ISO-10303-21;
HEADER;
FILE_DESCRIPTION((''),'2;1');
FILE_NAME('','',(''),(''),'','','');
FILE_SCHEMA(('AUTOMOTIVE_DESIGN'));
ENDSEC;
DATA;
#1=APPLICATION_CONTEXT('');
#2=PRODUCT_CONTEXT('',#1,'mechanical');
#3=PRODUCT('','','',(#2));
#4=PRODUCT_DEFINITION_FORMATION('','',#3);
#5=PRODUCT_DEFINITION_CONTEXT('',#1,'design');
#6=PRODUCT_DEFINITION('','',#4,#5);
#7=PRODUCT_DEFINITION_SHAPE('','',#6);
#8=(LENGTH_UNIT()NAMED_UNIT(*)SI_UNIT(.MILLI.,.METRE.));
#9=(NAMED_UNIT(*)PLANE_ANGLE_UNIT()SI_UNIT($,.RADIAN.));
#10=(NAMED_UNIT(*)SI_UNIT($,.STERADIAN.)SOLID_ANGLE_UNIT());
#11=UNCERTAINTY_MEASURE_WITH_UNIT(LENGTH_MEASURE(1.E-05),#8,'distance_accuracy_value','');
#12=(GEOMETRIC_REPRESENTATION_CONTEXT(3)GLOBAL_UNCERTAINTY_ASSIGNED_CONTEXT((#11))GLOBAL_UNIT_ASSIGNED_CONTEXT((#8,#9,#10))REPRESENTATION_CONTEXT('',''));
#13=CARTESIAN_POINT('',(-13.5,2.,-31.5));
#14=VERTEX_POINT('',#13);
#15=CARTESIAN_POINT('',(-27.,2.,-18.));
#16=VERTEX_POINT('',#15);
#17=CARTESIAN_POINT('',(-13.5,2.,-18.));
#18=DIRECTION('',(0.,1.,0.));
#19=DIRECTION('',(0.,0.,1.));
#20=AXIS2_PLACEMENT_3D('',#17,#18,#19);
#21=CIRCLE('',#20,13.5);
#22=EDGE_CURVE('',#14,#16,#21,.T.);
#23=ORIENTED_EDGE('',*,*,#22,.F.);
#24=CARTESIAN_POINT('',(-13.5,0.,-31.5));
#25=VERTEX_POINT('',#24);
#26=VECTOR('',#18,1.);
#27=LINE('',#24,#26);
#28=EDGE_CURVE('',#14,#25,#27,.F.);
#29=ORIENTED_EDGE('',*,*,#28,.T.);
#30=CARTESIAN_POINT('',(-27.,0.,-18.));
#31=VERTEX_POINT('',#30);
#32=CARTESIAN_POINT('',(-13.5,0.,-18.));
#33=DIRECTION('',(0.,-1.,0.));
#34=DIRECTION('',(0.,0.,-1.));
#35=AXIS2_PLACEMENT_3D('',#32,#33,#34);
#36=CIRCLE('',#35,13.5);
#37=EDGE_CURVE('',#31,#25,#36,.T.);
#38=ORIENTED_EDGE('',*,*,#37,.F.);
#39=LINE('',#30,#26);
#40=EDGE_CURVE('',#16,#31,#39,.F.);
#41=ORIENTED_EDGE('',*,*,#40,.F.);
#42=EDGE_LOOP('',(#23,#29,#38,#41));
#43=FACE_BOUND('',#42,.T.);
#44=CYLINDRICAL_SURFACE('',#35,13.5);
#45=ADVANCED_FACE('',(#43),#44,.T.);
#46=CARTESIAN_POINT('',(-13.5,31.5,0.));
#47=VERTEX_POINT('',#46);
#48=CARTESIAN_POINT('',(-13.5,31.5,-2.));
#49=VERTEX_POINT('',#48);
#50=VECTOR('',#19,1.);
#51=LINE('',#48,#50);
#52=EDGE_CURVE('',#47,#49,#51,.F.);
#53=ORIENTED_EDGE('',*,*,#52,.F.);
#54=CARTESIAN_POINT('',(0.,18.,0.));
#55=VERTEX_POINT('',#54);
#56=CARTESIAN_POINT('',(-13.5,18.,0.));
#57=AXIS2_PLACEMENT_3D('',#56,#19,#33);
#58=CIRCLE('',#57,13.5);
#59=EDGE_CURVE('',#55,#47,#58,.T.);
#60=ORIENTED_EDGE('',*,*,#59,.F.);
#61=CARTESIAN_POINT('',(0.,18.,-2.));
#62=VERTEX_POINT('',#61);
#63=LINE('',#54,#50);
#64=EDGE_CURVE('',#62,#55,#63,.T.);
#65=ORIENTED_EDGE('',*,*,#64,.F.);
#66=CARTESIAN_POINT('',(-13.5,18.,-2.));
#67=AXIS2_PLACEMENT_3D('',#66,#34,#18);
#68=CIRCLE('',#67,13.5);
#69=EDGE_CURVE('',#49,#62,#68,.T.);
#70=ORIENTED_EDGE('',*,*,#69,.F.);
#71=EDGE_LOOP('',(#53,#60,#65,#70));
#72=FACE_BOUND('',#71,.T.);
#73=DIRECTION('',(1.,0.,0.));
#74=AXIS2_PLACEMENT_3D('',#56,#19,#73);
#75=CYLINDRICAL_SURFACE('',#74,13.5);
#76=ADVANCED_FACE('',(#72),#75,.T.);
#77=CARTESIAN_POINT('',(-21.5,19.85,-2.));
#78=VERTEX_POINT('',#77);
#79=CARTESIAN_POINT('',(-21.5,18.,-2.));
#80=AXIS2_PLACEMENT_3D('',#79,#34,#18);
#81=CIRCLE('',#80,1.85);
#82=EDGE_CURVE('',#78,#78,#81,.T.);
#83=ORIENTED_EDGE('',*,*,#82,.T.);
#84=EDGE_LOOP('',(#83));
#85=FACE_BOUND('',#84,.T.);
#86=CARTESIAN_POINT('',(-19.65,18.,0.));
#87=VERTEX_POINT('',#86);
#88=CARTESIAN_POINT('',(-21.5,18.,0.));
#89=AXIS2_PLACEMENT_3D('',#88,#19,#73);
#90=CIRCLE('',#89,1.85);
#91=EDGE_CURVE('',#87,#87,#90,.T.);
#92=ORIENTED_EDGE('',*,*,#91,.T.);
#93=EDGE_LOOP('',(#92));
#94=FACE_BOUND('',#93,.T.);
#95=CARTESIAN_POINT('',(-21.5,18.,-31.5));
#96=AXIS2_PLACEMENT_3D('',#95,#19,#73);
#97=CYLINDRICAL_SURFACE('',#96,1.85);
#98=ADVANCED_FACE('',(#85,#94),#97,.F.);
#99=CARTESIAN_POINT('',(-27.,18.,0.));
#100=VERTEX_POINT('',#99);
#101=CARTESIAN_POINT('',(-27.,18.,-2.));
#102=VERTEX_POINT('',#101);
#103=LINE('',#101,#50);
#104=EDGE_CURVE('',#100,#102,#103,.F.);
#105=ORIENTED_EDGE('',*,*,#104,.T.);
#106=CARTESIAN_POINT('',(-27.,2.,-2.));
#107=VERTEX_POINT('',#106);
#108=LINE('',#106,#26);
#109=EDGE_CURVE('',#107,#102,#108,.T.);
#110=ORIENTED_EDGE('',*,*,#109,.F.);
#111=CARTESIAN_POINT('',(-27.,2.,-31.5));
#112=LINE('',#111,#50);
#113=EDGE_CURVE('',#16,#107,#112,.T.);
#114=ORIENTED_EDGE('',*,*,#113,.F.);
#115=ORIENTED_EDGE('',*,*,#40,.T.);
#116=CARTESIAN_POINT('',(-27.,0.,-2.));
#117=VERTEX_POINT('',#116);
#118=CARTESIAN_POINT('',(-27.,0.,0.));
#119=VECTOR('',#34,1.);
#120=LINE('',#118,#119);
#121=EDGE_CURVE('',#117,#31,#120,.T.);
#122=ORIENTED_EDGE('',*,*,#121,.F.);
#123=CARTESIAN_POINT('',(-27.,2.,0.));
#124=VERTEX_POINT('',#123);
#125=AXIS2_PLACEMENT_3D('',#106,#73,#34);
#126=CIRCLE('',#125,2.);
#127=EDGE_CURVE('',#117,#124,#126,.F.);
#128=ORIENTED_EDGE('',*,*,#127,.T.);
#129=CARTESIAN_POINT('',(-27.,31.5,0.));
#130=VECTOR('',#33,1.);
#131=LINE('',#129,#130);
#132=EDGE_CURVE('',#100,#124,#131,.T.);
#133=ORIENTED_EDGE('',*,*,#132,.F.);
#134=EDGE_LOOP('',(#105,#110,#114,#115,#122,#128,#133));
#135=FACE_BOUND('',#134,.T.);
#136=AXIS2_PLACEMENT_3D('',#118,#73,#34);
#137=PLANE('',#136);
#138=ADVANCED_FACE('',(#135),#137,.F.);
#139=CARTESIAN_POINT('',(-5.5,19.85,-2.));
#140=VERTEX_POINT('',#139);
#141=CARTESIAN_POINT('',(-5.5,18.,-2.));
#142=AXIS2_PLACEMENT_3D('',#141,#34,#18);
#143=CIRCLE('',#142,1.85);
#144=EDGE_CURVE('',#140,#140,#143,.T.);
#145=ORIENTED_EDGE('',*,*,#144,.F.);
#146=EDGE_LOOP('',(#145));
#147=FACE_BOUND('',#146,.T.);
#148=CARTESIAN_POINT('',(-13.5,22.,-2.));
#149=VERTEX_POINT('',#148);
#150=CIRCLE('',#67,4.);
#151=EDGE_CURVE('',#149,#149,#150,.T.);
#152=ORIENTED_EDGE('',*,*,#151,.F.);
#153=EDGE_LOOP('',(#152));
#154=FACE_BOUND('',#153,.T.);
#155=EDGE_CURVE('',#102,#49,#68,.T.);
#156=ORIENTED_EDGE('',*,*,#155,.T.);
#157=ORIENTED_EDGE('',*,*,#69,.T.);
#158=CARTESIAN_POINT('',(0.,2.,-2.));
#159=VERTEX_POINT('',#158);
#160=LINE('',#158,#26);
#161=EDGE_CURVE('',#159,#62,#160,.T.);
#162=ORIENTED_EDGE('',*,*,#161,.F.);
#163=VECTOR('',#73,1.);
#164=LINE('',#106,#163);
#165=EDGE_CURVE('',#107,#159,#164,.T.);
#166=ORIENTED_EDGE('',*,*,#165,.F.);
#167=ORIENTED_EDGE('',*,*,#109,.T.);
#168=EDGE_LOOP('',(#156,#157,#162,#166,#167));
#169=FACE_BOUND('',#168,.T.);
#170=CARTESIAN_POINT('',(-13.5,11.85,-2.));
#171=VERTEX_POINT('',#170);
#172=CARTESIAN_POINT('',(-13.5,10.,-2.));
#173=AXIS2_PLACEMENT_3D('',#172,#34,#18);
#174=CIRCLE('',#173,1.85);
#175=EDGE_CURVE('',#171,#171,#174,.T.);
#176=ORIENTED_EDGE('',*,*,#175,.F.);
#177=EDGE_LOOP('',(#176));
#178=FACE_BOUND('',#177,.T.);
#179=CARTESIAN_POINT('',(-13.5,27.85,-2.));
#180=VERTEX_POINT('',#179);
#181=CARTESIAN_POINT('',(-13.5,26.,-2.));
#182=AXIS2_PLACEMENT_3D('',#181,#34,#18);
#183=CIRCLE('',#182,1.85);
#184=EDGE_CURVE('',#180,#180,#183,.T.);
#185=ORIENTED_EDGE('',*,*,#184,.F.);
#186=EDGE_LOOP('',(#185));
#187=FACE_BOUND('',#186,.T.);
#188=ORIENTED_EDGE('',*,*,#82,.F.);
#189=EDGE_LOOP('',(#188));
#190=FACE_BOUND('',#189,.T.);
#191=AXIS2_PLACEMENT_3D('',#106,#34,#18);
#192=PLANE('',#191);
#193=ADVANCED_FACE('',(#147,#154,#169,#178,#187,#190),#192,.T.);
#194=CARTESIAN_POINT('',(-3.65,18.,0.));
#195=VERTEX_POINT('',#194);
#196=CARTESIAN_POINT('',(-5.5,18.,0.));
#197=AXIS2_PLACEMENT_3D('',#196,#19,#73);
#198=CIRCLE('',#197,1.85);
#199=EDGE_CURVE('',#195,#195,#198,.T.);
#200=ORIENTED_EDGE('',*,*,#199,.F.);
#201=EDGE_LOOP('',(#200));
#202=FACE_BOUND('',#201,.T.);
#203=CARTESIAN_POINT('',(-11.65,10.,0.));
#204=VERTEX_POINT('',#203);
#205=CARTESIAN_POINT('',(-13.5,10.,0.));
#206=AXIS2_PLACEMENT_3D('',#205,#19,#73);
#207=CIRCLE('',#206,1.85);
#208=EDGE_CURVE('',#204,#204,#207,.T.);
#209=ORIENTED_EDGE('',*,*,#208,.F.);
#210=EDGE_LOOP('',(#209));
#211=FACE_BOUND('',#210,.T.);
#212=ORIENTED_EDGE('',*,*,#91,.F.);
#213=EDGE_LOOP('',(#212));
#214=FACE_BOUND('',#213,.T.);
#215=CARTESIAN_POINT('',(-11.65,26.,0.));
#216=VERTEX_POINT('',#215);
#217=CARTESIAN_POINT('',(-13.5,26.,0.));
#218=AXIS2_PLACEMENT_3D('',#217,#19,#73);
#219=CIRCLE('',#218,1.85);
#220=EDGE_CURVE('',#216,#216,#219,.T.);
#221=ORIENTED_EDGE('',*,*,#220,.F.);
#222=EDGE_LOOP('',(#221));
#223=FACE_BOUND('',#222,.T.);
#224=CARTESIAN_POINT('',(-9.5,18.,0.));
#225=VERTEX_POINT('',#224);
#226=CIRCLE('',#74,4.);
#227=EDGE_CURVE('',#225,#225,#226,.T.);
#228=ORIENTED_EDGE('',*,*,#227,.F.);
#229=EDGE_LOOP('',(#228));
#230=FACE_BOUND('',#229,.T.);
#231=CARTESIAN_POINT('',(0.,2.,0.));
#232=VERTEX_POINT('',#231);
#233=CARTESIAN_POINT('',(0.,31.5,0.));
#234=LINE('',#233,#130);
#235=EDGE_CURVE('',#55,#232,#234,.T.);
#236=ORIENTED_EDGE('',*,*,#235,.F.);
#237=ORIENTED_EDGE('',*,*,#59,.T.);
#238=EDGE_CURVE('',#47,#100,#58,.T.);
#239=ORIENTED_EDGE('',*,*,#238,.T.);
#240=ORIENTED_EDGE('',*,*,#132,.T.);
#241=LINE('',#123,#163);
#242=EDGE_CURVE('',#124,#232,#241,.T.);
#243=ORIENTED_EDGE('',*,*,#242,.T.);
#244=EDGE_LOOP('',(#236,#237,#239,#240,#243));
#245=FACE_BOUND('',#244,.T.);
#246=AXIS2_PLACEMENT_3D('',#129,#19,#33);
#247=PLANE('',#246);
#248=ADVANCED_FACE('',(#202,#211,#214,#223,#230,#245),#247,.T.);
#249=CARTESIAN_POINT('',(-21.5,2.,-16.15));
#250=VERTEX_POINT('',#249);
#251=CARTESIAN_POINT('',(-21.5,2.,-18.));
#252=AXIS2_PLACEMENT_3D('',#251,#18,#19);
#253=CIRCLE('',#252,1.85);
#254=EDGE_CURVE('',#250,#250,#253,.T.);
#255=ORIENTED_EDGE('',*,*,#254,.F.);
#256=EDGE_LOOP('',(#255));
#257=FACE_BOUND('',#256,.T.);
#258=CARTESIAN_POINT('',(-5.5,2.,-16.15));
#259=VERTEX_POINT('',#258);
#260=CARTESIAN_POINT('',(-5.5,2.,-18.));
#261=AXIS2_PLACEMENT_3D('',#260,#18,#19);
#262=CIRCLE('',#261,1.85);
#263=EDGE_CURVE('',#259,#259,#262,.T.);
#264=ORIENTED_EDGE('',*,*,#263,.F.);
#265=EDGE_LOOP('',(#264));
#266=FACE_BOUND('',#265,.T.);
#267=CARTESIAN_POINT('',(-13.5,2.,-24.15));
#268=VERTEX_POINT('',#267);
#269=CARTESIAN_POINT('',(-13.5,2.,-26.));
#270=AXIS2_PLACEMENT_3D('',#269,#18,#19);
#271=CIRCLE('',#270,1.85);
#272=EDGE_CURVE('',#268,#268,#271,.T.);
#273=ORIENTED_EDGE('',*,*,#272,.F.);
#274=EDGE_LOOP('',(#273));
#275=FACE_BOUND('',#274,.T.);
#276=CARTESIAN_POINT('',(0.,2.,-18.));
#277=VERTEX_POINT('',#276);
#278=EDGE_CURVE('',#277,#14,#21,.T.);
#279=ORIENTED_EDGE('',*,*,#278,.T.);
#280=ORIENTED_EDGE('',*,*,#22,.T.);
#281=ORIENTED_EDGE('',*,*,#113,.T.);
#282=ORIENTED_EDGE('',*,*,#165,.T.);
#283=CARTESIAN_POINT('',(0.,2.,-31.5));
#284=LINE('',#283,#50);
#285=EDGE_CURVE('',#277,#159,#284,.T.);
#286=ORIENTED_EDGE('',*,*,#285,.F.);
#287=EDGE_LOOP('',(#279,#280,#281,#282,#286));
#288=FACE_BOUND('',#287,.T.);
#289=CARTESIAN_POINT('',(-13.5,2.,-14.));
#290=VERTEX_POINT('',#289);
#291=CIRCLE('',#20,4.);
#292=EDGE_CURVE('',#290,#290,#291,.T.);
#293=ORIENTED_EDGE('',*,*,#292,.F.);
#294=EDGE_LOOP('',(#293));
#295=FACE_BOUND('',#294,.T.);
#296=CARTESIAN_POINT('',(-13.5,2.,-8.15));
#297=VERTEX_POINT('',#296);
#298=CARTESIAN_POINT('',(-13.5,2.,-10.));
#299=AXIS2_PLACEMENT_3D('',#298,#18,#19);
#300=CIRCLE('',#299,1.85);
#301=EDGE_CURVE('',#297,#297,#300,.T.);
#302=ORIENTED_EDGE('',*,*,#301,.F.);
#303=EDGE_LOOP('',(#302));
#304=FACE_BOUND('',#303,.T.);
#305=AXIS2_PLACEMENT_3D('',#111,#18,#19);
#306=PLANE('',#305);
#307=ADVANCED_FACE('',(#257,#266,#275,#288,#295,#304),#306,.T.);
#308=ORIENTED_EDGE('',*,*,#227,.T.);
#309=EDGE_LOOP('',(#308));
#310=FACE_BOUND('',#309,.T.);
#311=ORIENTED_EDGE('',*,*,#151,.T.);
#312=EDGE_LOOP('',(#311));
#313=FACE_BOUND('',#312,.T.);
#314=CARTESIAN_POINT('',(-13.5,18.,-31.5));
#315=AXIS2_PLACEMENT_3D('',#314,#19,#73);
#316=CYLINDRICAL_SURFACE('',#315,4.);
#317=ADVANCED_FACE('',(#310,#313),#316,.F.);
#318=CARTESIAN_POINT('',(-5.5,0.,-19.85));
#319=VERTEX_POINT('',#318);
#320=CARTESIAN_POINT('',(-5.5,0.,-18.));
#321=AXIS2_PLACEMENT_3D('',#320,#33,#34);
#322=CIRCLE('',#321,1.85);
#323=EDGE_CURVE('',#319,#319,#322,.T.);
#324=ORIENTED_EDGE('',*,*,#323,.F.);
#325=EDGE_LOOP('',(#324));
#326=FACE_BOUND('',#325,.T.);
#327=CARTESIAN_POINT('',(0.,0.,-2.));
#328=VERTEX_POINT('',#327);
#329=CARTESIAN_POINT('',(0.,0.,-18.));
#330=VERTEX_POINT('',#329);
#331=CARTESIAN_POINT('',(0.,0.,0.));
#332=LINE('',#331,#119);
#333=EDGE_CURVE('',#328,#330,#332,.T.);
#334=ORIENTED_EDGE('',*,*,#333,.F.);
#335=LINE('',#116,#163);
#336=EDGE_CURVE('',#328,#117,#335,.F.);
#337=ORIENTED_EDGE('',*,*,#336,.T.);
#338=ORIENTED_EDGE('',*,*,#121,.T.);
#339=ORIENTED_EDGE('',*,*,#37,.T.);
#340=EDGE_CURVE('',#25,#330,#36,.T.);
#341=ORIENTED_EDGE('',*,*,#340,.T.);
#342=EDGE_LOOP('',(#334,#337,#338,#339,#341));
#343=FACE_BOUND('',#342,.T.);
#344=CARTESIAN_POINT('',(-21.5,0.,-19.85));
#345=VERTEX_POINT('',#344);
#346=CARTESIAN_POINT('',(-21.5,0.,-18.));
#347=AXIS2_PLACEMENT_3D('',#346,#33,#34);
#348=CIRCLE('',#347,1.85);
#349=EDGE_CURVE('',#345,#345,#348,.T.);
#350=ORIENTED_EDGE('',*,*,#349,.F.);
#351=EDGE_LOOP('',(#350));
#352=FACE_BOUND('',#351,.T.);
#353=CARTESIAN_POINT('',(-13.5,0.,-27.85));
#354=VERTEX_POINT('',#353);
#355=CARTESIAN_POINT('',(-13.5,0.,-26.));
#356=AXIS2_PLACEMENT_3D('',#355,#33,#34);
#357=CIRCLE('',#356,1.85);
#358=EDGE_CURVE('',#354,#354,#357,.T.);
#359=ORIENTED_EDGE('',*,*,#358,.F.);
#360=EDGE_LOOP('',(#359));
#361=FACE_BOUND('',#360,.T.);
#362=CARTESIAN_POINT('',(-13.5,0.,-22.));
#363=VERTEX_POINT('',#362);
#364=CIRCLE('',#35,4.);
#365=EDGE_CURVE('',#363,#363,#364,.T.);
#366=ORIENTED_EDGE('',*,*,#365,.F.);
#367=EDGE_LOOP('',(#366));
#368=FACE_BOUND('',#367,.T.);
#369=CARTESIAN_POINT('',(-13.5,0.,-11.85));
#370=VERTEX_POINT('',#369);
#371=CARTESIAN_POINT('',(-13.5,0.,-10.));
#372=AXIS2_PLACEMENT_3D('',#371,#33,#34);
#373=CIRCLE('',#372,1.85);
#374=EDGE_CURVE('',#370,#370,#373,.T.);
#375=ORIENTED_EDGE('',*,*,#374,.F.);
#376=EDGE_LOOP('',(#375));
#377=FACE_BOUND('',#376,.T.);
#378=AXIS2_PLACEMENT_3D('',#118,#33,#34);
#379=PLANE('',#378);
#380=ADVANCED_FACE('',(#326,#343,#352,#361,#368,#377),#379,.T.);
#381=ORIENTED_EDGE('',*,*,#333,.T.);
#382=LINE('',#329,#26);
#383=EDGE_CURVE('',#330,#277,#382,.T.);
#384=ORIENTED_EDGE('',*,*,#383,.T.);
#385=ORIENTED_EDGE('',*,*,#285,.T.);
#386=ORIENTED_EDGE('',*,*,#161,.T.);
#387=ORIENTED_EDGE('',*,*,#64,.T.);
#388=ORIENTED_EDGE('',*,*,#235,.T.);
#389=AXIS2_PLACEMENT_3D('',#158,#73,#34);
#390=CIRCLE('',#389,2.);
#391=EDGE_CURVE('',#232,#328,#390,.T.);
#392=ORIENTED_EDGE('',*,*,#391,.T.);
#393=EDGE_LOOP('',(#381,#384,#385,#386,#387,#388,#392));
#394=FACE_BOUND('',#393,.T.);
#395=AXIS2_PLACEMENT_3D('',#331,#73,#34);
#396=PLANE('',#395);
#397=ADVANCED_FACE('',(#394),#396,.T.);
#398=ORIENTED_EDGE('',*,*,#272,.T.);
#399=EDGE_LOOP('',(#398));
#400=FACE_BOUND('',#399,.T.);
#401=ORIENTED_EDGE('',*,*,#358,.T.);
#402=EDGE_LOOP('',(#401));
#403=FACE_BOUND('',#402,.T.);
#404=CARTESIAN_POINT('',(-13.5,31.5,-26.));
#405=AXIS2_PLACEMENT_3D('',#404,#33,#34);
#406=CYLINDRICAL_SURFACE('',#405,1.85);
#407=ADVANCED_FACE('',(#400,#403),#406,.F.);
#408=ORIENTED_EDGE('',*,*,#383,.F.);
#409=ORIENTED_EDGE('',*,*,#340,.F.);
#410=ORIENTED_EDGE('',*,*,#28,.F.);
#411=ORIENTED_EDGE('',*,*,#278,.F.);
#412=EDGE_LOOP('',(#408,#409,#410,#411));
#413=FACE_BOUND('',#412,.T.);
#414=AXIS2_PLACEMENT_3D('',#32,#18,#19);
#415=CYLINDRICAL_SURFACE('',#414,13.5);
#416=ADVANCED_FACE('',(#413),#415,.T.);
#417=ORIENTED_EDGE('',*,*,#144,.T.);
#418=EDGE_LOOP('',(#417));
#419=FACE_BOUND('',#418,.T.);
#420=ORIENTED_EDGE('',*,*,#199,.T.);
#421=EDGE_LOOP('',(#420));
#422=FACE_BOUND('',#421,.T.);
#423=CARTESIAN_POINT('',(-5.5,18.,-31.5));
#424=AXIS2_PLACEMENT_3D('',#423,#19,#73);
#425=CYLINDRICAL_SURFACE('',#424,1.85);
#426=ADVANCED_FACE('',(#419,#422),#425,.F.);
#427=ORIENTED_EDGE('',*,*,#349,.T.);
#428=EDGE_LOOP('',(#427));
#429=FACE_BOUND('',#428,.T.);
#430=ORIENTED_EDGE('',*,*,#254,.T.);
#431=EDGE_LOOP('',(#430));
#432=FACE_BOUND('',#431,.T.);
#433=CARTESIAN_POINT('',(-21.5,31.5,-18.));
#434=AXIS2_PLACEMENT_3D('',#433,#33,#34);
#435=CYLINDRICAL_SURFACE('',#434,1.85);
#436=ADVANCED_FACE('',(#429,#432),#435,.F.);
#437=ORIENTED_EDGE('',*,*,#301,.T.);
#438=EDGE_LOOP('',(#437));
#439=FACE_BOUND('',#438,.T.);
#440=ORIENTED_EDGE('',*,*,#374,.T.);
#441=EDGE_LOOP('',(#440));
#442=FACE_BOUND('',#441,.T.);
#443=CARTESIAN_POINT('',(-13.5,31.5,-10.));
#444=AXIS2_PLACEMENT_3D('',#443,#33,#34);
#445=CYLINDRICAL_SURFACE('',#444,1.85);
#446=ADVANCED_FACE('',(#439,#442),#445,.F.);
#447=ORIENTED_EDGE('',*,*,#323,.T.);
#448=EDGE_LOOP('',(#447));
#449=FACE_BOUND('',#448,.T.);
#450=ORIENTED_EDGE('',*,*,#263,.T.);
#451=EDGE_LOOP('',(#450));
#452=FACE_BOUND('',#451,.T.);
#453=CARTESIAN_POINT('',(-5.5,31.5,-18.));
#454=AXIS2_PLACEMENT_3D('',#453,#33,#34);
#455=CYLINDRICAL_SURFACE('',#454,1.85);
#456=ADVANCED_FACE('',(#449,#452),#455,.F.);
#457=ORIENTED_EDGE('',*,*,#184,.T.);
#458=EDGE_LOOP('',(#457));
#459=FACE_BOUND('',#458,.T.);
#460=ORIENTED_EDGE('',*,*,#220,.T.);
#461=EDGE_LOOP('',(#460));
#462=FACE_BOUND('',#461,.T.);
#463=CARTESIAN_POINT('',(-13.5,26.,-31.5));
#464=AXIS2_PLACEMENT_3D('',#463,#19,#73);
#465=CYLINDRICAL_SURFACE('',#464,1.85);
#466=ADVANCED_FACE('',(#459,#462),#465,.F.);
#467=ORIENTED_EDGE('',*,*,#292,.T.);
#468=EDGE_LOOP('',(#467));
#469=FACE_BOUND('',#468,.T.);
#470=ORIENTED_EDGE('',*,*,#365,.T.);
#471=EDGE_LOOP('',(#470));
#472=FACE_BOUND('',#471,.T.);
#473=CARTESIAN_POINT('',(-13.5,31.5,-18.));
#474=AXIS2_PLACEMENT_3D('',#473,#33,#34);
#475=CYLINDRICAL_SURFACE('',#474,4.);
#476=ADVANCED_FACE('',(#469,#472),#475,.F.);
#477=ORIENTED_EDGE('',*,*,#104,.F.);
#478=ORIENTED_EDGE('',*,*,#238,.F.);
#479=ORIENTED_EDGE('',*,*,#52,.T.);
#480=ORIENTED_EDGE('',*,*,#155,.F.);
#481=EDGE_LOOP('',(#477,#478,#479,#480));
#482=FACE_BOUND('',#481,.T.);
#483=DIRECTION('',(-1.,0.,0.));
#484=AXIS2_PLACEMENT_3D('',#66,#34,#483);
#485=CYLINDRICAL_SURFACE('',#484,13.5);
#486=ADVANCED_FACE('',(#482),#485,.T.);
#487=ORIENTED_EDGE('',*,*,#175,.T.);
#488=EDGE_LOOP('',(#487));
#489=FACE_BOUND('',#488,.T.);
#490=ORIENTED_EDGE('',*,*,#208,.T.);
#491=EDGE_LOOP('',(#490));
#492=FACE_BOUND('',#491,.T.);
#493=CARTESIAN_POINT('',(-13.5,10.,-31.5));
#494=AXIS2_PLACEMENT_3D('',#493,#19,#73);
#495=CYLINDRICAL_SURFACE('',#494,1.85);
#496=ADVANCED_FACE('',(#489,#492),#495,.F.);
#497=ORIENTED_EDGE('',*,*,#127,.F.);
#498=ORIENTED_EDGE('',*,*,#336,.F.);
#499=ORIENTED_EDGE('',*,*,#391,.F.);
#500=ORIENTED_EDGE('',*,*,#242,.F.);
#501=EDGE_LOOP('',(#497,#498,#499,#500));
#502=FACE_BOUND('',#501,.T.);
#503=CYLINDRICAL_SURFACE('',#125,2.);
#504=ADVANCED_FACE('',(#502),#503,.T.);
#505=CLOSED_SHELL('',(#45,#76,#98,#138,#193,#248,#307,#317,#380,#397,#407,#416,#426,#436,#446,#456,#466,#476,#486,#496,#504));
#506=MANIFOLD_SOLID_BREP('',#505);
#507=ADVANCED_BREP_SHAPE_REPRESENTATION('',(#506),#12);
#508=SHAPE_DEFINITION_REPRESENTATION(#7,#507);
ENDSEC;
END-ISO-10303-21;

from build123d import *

# Parameters (mm, degrees)
EXTRUDE1_DEPTH           = 27
CUT_EXTRUDE1_START       = -2
CUT_EXTRUDE1_OUTLINE_R   = 4
CUT_EXTRUDE1_OUTLINE_R_2 = 1.85
CUT_EXTRUDE1_DEPTH       = 2
CUT_EXTRUDE2_START       = -2
CUT_EXTRUDE2_OUTLINE_R   = 4
CUT_EXTRUDE2_OUTLINE_R_2 = 1.85
CUT_EXTRUDE2_DEPTH       = 2
FILLET1_R                = 13.5
FILLET2_R                = 13.5
FILLET3_R                = 13.5
FILLET4_R                = 13.5
FILLET5_R                = 2


# Read off the part's stored shape, not the designer's step: Cut-Extrude1, Cut-Extrude2
with BuildPart() as part:
    # Sketch1 → Extrude1 (new body)
    with BuildSketch(Plane(origin=(0, 0, 0), x_dir=(0, 0, -1), z_dir=(1, 0, 0))):
        Polygon((0, 0), (31.5, 0), (31.5, 2), (2, 2), (2, 31.5), (0, 31.5), align=None)
    extrude(amount=-EXTRUDE1_DEPTH)

    # Cut-Extrude1 outline → Cut-Extrude1 (cut)
    with BuildSketch(Plane.XY.offset(CUT_EXTRUDE1_START)):
        with Locations((-13.5, 18)):
            Circle(CUT_EXTRUDE1_OUTLINE_R)
        with Locations((-5.5, 18)):
            Circle(CUT_EXTRUDE1_OUTLINE_R_2)
        with Locations((-21.5, 18)):
            Circle(CUT_EXTRUDE1_OUTLINE_R_2)
        with Locations((-13.5, 10)):
            Circle(CUT_EXTRUDE1_OUTLINE_R_2)
        with Locations((-13.5, 26)):
            Circle(CUT_EXTRUDE1_OUTLINE_R_2)
    extrude(amount=CUT_EXTRUDE1_DEPTH, mode=Mode.SUBTRACT)

    # Cut-Extrude2 outline → Cut-Extrude2 (cut)
    with BuildSketch(Plane.XZ.offset(CUT_EXTRUDE2_START)):
        with Locations((-13.5, -18)):
            Circle(CUT_EXTRUDE2_OUTLINE_R)
        with Locations((-5.5, -18)):
            Circle(CUT_EXTRUDE2_OUTLINE_R_2)
        with Locations((-21.5, -18)):
            Circle(CUT_EXTRUDE2_OUTLINE_R_2)
        with Locations((-13.5, -26)):
            Circle(CUT_EXTRUDE2_OUTLINE_R_2)
        with Locations((-13.5, -10)):
            Circle(CUT_EXTRUDE2_OUTLINE_R_2)
    extrude(amount=CUT_EXTRUDE2_DEPTH, mode=Mode.SUBTRACT)

    # Fillet1
    fillet1_edges = [part.edges().sort_by_distance(p)[0] for p in [
        (0, 31.5, -1),
    ]]
    fillet(fillet1_edges, radius=FILLET1_R)

    # Fillet2
    fillet2_edges = [part.edges().sort_by_distance(p)[0] for p in [
        (-27, 31.5, -1),
    ]]
    fillet(fillet2_edges, radius=FILLET2_R - 0.0001)  # a hair under: the kernel refuses the full size

    # Fillet3
    fillet3_edges = [part.edges().sort_by_distance(p)[0] for p in [
        (0, 1, -31.5),
    ]]
    fillet(fillet3_edges, radius=FILLET3_R)

    # Fillet4
    fillet4_edges = [part.edges().sort_by_distance(p)[0] for p in [
        (-27, 1, -31.5),
    ]]
    fillet(fillet4_edges, radius=FILLET4_R - 0.0001)  # a hair under: the kernel refuses the full size

    # Fillet5
    fillet5_edges = [part.edges().sort_by_distance(p)[0] for p in [
        (-13.5, 0, 0),
    ]]
    fillet(fillet5_edges, radius=FILLET5_R)


solid = part.part
